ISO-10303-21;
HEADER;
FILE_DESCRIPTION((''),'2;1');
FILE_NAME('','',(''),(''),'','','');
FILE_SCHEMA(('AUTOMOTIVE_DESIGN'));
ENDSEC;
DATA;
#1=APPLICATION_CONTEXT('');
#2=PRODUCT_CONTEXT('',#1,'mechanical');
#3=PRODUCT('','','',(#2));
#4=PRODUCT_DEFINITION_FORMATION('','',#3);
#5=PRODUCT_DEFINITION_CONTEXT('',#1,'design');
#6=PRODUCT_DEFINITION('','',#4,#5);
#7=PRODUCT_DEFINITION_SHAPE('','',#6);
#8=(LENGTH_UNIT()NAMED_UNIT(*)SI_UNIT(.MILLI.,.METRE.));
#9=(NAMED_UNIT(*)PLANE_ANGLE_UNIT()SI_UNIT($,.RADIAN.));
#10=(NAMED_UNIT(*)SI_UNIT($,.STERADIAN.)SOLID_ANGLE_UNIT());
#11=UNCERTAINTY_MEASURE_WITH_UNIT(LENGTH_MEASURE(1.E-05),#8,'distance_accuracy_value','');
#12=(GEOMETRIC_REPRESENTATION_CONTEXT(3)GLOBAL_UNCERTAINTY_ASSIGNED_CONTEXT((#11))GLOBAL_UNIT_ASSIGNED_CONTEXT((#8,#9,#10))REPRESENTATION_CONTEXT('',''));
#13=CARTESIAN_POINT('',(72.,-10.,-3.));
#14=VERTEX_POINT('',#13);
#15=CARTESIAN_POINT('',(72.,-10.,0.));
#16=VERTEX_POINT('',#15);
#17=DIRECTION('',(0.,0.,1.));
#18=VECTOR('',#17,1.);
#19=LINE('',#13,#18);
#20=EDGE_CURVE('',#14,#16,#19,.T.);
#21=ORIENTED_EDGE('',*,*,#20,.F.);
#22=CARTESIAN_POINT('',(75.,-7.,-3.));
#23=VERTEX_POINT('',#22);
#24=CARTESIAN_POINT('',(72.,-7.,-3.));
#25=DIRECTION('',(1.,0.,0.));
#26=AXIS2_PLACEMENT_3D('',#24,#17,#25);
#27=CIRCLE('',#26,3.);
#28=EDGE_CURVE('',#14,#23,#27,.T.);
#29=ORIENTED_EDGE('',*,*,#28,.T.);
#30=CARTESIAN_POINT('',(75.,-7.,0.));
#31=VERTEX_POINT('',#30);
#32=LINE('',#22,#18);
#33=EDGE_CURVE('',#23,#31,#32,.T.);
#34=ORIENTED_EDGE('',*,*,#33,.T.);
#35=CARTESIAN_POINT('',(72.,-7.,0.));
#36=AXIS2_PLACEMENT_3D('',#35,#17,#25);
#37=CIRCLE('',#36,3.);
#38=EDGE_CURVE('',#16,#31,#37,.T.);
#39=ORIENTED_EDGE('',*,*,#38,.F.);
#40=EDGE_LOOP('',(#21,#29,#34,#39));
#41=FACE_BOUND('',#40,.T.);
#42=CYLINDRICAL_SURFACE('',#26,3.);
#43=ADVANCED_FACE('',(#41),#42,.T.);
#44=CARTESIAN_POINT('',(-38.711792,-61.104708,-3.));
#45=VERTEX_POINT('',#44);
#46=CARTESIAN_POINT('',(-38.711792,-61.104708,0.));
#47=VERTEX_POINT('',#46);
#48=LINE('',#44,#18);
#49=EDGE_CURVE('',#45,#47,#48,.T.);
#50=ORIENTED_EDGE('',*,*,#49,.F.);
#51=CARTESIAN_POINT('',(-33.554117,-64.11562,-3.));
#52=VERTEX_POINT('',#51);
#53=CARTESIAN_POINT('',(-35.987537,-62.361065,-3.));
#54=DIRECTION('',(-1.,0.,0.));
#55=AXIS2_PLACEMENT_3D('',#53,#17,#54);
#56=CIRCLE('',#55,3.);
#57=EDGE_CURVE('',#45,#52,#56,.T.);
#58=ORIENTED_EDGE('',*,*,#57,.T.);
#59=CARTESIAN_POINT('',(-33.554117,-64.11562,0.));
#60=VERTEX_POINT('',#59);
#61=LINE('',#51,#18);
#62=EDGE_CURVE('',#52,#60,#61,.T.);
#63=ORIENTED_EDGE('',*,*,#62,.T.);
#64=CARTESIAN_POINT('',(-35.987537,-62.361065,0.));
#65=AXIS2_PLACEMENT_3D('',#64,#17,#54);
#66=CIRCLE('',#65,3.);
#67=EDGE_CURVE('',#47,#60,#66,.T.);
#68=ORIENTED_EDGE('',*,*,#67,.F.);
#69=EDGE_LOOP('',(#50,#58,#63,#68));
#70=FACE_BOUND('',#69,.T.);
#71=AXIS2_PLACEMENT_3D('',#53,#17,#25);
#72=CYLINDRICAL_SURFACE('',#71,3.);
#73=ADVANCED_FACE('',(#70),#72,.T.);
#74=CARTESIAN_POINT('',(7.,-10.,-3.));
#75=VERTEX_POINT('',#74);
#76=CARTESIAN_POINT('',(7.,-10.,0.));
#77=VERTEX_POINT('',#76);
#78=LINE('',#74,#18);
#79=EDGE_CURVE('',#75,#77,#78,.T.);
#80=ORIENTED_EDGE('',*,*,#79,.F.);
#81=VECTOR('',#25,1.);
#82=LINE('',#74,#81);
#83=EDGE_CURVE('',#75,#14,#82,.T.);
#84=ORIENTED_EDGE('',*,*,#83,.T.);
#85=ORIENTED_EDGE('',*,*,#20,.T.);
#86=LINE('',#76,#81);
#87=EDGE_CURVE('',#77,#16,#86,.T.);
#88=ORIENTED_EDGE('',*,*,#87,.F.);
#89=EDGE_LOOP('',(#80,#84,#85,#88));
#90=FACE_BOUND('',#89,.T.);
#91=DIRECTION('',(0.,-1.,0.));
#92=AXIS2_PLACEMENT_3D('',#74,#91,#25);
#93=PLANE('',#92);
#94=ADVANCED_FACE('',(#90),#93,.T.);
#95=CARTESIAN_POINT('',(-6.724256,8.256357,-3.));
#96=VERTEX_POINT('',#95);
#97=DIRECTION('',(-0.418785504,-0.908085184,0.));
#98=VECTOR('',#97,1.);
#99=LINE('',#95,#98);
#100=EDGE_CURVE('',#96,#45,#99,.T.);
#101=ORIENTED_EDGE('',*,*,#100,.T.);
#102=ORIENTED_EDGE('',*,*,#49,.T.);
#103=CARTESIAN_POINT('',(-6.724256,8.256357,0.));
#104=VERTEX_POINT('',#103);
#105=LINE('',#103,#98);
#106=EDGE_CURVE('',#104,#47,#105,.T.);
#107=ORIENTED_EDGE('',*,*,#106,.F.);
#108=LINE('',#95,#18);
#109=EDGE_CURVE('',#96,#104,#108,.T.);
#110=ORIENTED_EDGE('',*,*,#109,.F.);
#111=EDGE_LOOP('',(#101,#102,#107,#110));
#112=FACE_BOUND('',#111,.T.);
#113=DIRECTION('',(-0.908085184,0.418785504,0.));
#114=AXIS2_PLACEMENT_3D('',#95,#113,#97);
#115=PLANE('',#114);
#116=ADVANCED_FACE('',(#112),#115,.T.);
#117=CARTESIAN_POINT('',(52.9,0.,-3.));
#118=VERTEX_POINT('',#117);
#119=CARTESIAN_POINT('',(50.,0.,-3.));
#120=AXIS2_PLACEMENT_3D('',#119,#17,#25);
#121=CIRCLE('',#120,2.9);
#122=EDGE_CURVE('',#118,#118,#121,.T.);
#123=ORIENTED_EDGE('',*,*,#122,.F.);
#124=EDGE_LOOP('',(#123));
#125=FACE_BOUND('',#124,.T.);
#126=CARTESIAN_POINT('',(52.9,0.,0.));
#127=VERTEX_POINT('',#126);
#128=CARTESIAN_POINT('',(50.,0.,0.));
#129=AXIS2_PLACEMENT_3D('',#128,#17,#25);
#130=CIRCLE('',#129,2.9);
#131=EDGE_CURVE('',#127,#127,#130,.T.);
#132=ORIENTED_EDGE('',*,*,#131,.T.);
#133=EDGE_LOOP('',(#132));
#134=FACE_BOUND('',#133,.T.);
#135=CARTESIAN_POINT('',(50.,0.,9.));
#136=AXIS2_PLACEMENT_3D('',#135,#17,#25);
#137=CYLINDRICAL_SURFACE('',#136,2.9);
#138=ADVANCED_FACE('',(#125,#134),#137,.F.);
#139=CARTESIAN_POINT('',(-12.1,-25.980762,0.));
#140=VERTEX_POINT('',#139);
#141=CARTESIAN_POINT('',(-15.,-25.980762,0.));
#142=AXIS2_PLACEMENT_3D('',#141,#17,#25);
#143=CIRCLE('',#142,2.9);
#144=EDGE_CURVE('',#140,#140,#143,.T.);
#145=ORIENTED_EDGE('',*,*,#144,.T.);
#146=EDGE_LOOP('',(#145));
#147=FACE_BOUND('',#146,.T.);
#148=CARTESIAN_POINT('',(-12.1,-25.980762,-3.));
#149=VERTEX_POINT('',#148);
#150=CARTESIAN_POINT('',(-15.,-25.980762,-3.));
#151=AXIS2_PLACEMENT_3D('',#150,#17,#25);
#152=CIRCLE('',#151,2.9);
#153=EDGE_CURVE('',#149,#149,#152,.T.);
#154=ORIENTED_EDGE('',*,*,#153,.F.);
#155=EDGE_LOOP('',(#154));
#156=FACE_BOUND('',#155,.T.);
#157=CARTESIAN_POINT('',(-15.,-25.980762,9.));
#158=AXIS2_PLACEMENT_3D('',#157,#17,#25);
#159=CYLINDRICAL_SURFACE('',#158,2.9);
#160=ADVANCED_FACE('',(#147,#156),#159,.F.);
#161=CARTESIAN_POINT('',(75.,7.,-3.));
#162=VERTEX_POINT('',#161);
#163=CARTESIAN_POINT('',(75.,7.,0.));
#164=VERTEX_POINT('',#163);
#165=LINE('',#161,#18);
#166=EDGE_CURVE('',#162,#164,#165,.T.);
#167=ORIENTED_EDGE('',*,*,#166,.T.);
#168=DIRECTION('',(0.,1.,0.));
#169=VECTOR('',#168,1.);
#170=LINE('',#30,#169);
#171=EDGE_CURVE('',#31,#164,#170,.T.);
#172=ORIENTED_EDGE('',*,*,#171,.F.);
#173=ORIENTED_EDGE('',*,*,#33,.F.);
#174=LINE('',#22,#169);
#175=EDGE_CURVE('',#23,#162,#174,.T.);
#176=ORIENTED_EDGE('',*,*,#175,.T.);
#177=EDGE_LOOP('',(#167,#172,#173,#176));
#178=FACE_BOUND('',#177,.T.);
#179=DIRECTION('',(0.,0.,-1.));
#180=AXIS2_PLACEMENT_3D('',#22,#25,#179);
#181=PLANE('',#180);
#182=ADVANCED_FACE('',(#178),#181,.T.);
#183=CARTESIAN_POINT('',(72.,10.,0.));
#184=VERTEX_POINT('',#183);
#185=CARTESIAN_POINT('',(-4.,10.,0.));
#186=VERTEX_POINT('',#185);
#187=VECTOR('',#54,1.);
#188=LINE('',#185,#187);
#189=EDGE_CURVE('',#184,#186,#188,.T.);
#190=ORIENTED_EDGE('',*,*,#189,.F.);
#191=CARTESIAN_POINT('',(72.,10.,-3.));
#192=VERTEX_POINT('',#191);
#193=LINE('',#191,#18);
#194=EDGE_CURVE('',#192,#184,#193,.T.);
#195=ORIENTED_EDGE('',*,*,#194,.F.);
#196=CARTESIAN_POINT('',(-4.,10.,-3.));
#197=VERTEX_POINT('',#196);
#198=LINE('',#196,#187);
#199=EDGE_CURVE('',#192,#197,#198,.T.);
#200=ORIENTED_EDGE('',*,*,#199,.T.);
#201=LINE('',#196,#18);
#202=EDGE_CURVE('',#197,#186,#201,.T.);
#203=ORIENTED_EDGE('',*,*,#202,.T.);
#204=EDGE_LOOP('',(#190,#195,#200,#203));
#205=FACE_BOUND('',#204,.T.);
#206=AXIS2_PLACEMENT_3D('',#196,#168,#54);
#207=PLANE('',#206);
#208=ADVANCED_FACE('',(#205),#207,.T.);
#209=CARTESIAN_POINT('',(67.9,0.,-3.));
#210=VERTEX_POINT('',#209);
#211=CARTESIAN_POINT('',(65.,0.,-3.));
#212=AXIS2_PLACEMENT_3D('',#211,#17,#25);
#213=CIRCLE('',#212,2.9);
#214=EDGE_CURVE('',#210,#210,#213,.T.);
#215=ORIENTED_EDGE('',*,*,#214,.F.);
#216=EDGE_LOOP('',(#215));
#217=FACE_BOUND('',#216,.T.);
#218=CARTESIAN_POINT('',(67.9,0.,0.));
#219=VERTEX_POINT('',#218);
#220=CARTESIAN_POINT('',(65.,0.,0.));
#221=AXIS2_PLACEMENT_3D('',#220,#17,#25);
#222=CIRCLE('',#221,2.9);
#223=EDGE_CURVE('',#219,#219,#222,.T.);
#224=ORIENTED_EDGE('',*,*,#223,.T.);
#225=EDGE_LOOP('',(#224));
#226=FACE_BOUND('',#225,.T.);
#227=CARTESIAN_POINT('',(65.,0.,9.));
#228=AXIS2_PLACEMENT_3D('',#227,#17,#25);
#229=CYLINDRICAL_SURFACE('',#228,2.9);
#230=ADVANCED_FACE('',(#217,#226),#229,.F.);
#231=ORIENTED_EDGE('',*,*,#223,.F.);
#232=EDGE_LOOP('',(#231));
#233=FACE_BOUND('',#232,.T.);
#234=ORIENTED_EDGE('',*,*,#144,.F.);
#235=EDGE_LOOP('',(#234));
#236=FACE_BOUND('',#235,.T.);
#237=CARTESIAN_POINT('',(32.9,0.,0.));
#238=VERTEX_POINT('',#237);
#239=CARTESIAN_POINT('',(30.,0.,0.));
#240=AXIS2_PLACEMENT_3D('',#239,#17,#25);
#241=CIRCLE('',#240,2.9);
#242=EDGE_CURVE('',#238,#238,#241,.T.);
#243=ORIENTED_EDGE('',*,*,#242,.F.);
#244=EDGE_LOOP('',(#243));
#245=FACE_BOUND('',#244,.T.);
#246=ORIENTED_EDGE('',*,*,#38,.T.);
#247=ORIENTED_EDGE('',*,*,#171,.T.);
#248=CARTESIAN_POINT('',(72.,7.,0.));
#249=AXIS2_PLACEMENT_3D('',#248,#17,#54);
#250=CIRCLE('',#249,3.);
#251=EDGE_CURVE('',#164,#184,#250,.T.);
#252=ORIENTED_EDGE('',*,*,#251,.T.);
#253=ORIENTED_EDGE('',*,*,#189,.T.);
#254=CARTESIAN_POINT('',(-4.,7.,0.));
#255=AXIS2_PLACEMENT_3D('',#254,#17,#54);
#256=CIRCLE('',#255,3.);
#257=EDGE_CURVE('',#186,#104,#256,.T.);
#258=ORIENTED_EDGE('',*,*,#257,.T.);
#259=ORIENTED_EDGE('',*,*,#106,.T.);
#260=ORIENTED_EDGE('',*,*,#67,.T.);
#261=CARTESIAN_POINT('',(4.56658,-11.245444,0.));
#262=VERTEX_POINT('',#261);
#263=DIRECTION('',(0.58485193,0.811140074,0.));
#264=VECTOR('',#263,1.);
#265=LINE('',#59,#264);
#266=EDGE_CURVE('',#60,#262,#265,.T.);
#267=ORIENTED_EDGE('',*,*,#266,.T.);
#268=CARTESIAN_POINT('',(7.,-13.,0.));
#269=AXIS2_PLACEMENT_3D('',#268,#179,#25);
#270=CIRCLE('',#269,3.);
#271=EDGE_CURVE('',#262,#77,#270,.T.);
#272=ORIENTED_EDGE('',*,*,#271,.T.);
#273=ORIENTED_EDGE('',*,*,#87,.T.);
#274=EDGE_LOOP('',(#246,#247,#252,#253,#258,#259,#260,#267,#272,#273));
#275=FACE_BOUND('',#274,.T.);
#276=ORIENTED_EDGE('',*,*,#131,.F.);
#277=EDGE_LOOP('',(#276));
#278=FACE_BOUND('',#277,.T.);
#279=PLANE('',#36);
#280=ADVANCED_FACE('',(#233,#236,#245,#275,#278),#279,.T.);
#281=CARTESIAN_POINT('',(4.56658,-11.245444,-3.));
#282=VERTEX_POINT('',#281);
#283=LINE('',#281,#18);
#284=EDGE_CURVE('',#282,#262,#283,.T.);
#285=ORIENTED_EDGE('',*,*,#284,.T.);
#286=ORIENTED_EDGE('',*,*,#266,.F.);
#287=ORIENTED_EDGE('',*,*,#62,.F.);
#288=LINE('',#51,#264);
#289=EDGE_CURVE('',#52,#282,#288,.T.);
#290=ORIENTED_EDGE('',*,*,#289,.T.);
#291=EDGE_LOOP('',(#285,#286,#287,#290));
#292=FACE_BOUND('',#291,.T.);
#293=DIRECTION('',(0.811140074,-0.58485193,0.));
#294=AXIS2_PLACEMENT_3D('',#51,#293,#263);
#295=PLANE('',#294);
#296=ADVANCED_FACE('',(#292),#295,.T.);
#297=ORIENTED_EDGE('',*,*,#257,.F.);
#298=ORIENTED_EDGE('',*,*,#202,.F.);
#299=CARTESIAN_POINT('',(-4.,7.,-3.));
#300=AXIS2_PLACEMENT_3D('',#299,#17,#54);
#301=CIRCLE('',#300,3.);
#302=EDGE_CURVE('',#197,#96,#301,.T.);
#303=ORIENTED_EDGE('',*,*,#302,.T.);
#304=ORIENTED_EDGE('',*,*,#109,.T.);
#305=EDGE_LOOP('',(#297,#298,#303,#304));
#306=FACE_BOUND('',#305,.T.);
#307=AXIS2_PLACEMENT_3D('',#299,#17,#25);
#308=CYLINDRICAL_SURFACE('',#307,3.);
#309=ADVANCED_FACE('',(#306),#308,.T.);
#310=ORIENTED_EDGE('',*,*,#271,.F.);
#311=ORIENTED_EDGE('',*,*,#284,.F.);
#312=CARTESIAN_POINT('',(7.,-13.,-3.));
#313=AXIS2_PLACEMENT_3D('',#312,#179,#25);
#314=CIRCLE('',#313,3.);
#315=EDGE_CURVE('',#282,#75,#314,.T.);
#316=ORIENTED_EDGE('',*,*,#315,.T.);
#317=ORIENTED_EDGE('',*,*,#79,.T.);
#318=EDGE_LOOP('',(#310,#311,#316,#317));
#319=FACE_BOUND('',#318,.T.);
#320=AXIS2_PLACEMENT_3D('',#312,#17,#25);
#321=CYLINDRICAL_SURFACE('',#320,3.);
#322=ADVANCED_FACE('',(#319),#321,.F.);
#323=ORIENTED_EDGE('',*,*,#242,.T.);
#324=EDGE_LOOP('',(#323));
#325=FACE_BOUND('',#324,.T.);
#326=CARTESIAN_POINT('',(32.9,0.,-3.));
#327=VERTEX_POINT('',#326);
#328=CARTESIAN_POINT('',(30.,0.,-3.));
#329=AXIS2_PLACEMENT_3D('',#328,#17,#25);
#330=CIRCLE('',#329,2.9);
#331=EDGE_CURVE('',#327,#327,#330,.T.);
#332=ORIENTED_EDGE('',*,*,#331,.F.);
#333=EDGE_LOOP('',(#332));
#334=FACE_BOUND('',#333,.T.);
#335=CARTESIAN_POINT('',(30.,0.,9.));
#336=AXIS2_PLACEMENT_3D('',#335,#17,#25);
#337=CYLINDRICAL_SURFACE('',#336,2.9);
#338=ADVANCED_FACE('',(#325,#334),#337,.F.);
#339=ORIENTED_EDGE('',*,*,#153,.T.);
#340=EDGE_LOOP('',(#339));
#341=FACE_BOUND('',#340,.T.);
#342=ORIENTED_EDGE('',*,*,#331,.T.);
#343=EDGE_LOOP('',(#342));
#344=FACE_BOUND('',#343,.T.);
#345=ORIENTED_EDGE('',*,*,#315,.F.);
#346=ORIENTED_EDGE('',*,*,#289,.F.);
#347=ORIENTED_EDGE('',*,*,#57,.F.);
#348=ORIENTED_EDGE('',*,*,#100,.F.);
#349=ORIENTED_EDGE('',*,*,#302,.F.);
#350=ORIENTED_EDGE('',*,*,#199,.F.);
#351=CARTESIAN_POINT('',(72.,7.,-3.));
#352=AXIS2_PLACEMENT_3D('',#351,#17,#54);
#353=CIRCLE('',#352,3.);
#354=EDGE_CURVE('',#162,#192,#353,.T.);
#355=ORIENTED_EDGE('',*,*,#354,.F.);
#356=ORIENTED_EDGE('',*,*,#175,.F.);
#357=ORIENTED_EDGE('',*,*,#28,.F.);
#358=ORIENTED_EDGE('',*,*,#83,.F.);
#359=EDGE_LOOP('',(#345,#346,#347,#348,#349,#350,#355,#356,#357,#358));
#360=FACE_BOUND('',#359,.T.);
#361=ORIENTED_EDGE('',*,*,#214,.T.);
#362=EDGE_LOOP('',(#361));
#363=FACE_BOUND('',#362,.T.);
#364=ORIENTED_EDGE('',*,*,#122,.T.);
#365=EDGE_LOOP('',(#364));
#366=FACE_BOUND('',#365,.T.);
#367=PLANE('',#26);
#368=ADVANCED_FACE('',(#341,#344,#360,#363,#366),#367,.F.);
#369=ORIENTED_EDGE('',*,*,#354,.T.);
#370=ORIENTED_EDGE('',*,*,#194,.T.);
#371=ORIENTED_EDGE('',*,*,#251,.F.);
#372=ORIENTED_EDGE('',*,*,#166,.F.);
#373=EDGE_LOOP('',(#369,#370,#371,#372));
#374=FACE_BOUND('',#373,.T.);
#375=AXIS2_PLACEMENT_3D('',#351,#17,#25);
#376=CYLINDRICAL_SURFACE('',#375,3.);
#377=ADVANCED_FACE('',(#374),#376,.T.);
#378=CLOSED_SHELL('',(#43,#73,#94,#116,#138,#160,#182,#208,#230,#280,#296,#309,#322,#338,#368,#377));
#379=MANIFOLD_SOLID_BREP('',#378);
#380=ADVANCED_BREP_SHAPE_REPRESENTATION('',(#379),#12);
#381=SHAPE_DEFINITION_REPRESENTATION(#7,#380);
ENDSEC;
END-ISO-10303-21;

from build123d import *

# Parameters (mm, degrees)
BOSS_EXTRU_1_DEPTH       = 3
D_GAGEMENT_START         = -3
D_GAGEMENT_M51_OUTLINE_R = 2.9
D_GAGEMENT_M51_DEPTH     = 3


# Read off the part's stored shape, not the designer's step: Dégagement M51
with BuildPart() as part:
    # Esquisse1 → Boss.-Extru.1 (new body)
    with BuildSketch(Plane.XY):
        with BuildLine():
            Line((-6.724255553, 8.256356511), (-38.711792489, -61.104708083))
            ThreePointArc((-38.711792489, -61.104708083), (-37.5, -64.951905284), (-33.554116714, -64.115620384))
            Line((-33.554116714, -64.115620384), (4.566579778, -11.24544421))
            ThreePointArc((4.566579778, -11.24544421), (5.633191193, -10.329450677), (7, -10))
            Line((7, -10), (72, -10))
            ThreePointArc((72, -10), (74.121320344, -9.121320344), (75, -7))
            Line((75, -7), (75, 7))
            ThreePointArc((75, 7), (74.121320344, 9.121320344), (72, 10))
            Line((72, 10), (-4, 10))
            ThreePointArc((-4, 10), (-5.617240005, 9.526763694), (-6.724255553, 8.256356511))
        make_face()
    extrude(amount=-BOSS_EXTRU_1_DEPTH)

    # Dégagement M51 outline → Dégagement M51 (cut)
    with BuildSketch(Plane.XY.offset(D_GAGEMENT_START)):
        with Locations((65, 0)):
            Circle(D_GAGEMENT_M51_OUTLINE_R)
        with Locations((50, 0)):
            Circle(D_GAGEMENT_M51_OUTLINE_R)
        with Locations((-15, -25.980762114)):
            Circle(D_GAGEMENT_M51_OUTLINE_R)
        with Locations((30, 0)):
            Circle(D_GAGEMENT_M51_OUTLINE_R)
    extrude(amount=D_GAGEMENT_M51_DEPTH, mode=Mode.SUBTRACT)


solid = part.part
